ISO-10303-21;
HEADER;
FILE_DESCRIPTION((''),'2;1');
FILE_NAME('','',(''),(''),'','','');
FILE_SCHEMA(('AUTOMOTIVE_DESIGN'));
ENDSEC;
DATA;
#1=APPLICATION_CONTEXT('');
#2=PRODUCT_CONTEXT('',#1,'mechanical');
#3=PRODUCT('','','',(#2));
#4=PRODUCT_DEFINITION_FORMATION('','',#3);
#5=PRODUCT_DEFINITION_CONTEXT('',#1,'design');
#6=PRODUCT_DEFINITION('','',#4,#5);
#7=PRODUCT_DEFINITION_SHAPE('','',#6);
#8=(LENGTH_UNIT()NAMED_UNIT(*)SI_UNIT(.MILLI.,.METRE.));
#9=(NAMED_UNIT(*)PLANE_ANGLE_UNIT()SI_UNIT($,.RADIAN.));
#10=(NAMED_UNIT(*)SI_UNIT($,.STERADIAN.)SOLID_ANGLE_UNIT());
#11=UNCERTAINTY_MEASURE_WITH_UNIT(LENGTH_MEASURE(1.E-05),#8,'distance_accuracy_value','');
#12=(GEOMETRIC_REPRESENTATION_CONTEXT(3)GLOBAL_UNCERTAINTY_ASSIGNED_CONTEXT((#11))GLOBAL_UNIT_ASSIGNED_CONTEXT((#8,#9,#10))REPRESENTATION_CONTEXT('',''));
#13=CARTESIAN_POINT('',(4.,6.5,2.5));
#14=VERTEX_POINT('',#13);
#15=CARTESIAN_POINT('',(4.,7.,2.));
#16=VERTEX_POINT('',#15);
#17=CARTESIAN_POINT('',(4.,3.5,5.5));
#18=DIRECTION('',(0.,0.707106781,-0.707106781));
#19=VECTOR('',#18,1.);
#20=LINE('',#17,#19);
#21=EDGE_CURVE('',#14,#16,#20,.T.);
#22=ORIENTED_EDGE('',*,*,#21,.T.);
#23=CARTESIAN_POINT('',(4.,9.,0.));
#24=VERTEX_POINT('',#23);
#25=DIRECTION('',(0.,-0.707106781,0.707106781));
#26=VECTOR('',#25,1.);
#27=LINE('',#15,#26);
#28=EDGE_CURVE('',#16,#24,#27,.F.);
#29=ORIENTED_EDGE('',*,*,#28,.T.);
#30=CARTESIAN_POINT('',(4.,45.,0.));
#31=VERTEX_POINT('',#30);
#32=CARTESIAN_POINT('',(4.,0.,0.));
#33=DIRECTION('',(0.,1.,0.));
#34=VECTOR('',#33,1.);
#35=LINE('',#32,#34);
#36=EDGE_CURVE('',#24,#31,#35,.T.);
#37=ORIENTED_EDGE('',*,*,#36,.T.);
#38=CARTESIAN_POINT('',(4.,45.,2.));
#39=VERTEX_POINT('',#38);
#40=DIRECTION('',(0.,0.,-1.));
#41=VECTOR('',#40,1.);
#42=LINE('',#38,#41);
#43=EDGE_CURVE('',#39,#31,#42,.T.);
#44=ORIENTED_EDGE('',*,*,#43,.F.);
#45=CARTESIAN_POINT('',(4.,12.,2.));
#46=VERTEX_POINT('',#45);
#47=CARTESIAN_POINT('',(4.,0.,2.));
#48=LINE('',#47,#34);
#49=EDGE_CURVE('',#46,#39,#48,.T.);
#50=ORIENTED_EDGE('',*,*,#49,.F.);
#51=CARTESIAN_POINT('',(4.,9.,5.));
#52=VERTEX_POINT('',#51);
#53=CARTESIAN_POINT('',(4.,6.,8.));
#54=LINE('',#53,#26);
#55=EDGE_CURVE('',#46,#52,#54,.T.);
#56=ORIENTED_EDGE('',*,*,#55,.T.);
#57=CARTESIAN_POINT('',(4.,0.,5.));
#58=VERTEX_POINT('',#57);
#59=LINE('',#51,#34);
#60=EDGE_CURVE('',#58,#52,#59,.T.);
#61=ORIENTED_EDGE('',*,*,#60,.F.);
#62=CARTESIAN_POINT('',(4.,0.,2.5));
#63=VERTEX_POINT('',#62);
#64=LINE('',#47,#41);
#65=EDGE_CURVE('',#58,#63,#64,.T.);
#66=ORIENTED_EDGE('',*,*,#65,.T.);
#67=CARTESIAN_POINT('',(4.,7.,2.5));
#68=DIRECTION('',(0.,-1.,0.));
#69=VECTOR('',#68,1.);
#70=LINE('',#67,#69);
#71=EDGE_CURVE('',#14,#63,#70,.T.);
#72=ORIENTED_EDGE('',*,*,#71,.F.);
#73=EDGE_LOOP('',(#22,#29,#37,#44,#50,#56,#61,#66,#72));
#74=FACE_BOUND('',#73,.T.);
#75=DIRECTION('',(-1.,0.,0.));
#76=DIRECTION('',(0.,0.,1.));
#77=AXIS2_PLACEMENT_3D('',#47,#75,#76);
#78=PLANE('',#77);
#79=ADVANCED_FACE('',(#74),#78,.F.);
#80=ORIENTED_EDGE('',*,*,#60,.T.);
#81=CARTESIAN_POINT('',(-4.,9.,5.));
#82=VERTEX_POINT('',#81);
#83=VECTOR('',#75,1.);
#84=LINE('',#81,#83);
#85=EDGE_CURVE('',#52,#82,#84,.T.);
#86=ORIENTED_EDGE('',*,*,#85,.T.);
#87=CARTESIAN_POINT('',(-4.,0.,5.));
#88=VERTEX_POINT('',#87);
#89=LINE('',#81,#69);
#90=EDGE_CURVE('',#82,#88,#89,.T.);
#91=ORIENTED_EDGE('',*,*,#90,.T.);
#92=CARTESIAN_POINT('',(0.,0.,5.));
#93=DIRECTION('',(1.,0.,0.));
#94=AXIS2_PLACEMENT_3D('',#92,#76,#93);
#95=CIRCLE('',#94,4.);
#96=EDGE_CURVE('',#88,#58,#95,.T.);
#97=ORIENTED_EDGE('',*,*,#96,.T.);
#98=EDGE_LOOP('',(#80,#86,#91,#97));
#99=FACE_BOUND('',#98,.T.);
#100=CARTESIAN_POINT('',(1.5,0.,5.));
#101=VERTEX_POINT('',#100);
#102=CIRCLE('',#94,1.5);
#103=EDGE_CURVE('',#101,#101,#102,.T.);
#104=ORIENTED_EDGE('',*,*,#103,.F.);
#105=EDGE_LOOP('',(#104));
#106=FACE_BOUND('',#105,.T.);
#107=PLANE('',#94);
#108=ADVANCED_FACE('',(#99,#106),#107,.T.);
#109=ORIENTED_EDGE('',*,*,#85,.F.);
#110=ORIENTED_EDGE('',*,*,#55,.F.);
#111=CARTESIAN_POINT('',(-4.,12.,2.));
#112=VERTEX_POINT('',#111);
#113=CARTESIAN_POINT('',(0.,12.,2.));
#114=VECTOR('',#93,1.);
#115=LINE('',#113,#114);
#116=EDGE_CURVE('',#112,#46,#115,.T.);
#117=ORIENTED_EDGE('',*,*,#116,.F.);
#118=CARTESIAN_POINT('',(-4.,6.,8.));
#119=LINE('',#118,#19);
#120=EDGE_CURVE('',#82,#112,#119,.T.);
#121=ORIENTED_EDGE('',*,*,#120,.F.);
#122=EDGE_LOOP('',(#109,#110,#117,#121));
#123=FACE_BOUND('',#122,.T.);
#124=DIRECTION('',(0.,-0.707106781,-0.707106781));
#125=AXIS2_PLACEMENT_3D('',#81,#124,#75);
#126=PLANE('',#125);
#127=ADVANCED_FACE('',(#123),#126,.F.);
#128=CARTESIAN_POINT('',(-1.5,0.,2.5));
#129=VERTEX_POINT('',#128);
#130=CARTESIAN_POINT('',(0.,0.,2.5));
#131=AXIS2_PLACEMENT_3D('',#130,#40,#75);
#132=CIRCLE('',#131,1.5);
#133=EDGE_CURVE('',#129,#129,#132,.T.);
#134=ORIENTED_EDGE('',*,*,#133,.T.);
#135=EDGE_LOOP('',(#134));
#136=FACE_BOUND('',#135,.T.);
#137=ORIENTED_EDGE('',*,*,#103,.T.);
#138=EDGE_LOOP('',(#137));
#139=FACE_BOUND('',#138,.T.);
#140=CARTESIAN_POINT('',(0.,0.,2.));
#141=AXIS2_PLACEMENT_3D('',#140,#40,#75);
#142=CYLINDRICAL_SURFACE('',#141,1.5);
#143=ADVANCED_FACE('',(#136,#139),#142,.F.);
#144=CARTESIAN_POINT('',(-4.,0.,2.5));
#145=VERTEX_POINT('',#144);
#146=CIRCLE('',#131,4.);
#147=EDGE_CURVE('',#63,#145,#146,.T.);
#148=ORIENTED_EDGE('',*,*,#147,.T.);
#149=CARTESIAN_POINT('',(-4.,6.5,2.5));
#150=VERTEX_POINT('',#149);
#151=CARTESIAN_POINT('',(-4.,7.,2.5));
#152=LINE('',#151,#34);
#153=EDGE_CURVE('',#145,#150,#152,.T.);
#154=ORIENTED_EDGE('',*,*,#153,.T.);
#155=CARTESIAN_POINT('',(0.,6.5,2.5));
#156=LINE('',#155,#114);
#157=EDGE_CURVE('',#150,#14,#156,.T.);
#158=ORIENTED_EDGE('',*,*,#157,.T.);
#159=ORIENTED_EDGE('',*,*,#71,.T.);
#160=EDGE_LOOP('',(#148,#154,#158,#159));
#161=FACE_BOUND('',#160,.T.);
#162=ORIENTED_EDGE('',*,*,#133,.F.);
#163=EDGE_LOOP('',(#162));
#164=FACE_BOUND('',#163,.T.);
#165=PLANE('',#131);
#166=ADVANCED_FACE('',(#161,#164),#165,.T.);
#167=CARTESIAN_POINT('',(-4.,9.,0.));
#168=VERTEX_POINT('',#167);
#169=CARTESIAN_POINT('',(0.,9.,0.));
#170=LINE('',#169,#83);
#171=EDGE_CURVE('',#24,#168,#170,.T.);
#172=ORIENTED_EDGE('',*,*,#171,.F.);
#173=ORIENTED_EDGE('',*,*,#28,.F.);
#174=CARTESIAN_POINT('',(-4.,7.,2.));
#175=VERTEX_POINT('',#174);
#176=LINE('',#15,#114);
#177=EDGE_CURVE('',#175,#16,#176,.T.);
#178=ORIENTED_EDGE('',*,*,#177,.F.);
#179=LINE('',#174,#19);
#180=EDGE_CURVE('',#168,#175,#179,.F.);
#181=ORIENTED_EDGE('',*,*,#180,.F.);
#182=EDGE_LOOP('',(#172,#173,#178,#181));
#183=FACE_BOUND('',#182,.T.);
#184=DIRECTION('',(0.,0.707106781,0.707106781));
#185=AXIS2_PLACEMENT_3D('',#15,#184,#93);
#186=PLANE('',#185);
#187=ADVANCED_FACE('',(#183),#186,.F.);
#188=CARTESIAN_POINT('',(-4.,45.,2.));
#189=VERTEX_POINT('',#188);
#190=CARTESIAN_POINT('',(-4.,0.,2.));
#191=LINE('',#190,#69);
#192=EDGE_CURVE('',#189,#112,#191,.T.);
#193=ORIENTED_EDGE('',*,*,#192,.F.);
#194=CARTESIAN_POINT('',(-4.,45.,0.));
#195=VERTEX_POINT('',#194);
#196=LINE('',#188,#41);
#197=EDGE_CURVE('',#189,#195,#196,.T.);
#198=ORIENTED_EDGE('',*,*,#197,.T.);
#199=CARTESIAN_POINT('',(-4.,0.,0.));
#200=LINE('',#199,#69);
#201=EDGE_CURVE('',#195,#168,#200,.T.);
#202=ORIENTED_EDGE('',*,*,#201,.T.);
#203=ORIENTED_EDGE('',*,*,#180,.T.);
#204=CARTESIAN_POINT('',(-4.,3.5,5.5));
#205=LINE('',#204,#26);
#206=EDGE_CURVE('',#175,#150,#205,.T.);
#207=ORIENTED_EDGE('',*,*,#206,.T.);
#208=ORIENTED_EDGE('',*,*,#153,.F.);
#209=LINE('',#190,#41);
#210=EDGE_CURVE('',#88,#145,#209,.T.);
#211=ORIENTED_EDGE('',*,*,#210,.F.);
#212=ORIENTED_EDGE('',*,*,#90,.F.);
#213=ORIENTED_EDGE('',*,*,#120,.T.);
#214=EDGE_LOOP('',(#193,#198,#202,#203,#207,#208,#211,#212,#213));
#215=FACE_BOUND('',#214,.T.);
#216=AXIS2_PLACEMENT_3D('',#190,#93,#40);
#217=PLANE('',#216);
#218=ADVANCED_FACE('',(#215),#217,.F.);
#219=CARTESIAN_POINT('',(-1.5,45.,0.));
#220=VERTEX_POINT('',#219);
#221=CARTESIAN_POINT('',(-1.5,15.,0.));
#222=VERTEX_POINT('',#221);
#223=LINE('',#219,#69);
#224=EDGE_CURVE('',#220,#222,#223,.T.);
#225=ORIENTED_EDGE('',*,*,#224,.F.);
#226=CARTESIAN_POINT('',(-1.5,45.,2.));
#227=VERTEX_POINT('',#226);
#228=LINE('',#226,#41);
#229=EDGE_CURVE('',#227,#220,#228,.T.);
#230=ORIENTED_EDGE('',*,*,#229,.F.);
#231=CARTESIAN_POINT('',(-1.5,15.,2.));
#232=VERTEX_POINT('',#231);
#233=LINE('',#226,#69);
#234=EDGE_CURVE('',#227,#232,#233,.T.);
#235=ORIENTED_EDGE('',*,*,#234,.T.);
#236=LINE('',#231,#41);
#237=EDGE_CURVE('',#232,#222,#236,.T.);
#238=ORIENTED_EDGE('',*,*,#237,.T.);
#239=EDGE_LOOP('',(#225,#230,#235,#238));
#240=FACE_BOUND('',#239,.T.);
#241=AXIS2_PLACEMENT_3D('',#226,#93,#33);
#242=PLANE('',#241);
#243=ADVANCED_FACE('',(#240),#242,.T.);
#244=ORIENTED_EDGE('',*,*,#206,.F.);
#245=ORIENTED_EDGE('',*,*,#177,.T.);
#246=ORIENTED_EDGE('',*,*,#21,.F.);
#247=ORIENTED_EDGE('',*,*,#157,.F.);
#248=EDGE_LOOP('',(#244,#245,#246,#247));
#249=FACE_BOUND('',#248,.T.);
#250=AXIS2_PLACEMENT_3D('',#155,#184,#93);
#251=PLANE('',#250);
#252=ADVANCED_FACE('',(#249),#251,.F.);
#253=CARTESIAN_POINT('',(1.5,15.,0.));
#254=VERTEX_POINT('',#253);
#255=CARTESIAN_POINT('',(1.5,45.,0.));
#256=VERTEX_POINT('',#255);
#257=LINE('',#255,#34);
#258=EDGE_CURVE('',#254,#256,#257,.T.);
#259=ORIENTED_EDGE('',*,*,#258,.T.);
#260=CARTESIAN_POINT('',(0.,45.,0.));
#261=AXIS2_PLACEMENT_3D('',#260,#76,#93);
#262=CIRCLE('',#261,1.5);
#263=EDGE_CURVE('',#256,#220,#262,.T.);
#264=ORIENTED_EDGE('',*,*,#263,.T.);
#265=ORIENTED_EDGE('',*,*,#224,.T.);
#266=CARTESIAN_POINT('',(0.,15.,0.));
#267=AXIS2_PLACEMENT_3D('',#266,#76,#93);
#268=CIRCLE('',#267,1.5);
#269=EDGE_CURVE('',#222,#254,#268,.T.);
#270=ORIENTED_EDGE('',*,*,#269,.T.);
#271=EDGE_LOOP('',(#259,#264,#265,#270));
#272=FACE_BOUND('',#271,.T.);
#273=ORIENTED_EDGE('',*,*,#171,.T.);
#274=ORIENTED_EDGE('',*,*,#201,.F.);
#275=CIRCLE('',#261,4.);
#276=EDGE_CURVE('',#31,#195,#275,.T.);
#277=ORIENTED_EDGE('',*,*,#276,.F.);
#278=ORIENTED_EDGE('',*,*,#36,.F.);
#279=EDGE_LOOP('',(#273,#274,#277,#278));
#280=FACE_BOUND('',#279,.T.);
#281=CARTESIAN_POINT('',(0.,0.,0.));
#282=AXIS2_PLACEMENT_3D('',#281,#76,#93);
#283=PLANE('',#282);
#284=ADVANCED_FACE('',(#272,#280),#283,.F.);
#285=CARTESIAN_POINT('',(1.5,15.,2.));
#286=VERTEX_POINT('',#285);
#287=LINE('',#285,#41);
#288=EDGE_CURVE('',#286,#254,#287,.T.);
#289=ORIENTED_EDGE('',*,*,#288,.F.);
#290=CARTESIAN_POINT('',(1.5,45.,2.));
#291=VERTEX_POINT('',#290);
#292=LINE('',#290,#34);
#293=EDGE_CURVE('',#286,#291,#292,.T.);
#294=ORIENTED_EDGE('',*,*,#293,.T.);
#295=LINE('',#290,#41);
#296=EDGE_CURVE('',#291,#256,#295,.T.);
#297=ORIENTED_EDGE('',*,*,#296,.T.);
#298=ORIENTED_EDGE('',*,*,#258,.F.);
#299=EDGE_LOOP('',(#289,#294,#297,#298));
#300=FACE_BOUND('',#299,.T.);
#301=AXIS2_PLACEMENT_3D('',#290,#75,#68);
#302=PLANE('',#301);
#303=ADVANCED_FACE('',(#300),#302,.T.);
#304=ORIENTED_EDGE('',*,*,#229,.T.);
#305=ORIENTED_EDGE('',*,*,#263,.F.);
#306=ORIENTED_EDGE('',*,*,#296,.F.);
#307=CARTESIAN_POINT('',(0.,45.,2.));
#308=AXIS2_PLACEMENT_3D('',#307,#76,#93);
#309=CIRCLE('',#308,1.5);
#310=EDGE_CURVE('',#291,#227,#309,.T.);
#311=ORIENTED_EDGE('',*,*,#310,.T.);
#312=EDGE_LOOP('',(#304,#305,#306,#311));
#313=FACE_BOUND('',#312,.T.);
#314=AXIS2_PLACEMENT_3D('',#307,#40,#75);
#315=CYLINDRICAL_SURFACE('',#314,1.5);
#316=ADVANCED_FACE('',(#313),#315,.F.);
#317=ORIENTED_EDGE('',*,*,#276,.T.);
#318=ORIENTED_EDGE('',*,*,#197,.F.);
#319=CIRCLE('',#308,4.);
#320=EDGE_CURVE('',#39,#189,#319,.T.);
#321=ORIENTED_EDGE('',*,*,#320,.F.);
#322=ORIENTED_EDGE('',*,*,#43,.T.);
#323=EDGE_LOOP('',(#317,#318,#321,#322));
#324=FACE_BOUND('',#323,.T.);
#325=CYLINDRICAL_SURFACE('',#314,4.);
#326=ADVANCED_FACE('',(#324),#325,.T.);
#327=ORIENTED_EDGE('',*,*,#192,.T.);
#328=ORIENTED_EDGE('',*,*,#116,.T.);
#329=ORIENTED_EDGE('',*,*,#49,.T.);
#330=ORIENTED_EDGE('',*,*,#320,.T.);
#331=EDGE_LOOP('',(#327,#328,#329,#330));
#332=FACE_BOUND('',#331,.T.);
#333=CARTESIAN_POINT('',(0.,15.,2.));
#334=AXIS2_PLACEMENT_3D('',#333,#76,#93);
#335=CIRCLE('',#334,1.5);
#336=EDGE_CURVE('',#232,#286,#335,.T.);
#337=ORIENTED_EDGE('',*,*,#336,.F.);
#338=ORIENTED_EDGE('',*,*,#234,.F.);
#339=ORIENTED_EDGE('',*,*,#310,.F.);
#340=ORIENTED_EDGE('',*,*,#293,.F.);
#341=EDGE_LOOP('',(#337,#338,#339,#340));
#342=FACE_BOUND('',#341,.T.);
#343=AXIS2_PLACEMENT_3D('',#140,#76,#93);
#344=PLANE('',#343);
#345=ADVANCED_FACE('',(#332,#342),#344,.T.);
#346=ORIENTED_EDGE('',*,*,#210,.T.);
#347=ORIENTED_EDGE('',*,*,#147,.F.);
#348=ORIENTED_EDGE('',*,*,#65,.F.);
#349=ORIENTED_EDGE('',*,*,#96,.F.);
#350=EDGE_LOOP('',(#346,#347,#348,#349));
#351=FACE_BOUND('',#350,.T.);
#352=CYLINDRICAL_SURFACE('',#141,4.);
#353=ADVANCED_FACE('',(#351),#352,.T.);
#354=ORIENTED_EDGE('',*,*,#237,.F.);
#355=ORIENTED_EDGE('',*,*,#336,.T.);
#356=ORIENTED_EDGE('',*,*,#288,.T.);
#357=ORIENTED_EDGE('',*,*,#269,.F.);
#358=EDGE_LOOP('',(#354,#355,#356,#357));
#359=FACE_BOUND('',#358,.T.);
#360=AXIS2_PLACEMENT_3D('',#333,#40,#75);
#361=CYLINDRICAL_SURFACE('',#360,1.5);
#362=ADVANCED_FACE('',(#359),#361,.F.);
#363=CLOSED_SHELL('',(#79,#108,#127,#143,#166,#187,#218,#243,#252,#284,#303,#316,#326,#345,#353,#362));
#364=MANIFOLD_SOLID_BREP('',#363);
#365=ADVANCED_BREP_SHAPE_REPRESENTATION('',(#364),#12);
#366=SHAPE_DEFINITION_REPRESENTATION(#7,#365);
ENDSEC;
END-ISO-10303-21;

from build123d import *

# Parameters (mm, degrees)
SZKIC1_R                    = 1.5
DODANIE_WYCI_GNI_CIE1_DEPTH = 2
SZKIC2_R                    = 1.5
DODANIE_WYCI_GNI_CIE2_DEPTH = 3
WYTNIJ_WYCI_GNI_CIE1_DEPTH  = 2.5
SFAZOWANIE1_SIZE            = 3
SFAZOWANIE2_SIZE            = 2
SFAZOWANIE3_SIZE            = 0.5


with BuildPart() as part:
    # Szkic1 → Dodanie-wyciągnięcie1 (new body)
    with BuildSketch(Plane.XY):
        with BuildLine():
            Line((-4, 0), (-4, 45))
            ThreePointArc((-4, 45), (0, 49), (4, 45))
            Line((4, 45), (4, 0))
            ThreePointArc((4, 0), (0, -4), (-4, 0))
        make_face()
        Circle(SZKIC1_R, mode=Mode.SUBTRACT)
        with BuildLine():
            Line((1.5, 45), (1.5, 15))
            ThreePointArc((1.5, 15), (0, 13.5), (-1.5, 15))
            Line((-1.5, 15), (-1.5, 45))
            ThreePointArc((-1.5, 45), (0, 46.5), (1.5, 45))
        make_face(mode=Mode.SUBTRACT)
    extrude(amount=DODANIE_WYCI_GNI_CIE1_DEPTH)

    # Szkic2 → Dodanie-wyciągnięcie2 (add)
    with BuildSketch(Plane.XY.offset(2)):
        with BuildLine():
            Line((-4, 9), (4, 9))
            Line((4, 9), (4, 0))
            ThreePointArc((4, 0), (0, -4), (-4, 0))
            Line((-4, 0), (-4, 9))
        make_face()
        Circle(SZKIC2_R, mode=Mode.SUBTRACT)
    extrude(amount=DODANIE_WYCI_GNI_CIE2_DEPTH)

    # Szkic3 → Wytnij-wyciągnięcie1 (cut)
    with BuildSketch(Plane(origin=(0, 0, 0), x_dir=(-1, 0, 0), z_dir=(0, 0, -1))):
        with BuildLine():
            Line((-4, 7), (4, 7))
            Line((4, 7), (4, 0))
            ThreePointArc((4, 0), (0, -4), (-4, 0))
            Line((-4, 0), (-4, 7))
        make_face()
    extrude(amount=-WYTNIJ_WYCI_GNI_CIE1_DEPTH, mode=Mode.SUBTRACT)

    # Sfazowanie1
    sfazowanie1_edges = [part.edges().sort_by_distance(p)[0] for p in [
        (0, 9, 2),
    ]]
    chamfer(sfazowanie1_edges, length=SFAZOWANIE1_SIZE - 0.0001)  # a hair under: the kernel refuses the full size

    # Sfazowanie2
    sfazowanie2_edges = [part.edges().sort_by_distance(p)[0] for p in [
        (0, 7, 0),
    ]]
    chamfer(sfazowanie2_edges, length=SFAZOWANIE2_SIZE)

    # Sfazowanie3
    sfazowanie3_edges = [part.edges().sort_by_distance(p)[0] for p in [
        (0, 7, 2.5),
    ]]
    chamfer(sfazowanie3_edges, length=SFAZOWANIE3_SIZE - 0.0001)  # a hair under: the kernel refuses the full size


solid = part.part
